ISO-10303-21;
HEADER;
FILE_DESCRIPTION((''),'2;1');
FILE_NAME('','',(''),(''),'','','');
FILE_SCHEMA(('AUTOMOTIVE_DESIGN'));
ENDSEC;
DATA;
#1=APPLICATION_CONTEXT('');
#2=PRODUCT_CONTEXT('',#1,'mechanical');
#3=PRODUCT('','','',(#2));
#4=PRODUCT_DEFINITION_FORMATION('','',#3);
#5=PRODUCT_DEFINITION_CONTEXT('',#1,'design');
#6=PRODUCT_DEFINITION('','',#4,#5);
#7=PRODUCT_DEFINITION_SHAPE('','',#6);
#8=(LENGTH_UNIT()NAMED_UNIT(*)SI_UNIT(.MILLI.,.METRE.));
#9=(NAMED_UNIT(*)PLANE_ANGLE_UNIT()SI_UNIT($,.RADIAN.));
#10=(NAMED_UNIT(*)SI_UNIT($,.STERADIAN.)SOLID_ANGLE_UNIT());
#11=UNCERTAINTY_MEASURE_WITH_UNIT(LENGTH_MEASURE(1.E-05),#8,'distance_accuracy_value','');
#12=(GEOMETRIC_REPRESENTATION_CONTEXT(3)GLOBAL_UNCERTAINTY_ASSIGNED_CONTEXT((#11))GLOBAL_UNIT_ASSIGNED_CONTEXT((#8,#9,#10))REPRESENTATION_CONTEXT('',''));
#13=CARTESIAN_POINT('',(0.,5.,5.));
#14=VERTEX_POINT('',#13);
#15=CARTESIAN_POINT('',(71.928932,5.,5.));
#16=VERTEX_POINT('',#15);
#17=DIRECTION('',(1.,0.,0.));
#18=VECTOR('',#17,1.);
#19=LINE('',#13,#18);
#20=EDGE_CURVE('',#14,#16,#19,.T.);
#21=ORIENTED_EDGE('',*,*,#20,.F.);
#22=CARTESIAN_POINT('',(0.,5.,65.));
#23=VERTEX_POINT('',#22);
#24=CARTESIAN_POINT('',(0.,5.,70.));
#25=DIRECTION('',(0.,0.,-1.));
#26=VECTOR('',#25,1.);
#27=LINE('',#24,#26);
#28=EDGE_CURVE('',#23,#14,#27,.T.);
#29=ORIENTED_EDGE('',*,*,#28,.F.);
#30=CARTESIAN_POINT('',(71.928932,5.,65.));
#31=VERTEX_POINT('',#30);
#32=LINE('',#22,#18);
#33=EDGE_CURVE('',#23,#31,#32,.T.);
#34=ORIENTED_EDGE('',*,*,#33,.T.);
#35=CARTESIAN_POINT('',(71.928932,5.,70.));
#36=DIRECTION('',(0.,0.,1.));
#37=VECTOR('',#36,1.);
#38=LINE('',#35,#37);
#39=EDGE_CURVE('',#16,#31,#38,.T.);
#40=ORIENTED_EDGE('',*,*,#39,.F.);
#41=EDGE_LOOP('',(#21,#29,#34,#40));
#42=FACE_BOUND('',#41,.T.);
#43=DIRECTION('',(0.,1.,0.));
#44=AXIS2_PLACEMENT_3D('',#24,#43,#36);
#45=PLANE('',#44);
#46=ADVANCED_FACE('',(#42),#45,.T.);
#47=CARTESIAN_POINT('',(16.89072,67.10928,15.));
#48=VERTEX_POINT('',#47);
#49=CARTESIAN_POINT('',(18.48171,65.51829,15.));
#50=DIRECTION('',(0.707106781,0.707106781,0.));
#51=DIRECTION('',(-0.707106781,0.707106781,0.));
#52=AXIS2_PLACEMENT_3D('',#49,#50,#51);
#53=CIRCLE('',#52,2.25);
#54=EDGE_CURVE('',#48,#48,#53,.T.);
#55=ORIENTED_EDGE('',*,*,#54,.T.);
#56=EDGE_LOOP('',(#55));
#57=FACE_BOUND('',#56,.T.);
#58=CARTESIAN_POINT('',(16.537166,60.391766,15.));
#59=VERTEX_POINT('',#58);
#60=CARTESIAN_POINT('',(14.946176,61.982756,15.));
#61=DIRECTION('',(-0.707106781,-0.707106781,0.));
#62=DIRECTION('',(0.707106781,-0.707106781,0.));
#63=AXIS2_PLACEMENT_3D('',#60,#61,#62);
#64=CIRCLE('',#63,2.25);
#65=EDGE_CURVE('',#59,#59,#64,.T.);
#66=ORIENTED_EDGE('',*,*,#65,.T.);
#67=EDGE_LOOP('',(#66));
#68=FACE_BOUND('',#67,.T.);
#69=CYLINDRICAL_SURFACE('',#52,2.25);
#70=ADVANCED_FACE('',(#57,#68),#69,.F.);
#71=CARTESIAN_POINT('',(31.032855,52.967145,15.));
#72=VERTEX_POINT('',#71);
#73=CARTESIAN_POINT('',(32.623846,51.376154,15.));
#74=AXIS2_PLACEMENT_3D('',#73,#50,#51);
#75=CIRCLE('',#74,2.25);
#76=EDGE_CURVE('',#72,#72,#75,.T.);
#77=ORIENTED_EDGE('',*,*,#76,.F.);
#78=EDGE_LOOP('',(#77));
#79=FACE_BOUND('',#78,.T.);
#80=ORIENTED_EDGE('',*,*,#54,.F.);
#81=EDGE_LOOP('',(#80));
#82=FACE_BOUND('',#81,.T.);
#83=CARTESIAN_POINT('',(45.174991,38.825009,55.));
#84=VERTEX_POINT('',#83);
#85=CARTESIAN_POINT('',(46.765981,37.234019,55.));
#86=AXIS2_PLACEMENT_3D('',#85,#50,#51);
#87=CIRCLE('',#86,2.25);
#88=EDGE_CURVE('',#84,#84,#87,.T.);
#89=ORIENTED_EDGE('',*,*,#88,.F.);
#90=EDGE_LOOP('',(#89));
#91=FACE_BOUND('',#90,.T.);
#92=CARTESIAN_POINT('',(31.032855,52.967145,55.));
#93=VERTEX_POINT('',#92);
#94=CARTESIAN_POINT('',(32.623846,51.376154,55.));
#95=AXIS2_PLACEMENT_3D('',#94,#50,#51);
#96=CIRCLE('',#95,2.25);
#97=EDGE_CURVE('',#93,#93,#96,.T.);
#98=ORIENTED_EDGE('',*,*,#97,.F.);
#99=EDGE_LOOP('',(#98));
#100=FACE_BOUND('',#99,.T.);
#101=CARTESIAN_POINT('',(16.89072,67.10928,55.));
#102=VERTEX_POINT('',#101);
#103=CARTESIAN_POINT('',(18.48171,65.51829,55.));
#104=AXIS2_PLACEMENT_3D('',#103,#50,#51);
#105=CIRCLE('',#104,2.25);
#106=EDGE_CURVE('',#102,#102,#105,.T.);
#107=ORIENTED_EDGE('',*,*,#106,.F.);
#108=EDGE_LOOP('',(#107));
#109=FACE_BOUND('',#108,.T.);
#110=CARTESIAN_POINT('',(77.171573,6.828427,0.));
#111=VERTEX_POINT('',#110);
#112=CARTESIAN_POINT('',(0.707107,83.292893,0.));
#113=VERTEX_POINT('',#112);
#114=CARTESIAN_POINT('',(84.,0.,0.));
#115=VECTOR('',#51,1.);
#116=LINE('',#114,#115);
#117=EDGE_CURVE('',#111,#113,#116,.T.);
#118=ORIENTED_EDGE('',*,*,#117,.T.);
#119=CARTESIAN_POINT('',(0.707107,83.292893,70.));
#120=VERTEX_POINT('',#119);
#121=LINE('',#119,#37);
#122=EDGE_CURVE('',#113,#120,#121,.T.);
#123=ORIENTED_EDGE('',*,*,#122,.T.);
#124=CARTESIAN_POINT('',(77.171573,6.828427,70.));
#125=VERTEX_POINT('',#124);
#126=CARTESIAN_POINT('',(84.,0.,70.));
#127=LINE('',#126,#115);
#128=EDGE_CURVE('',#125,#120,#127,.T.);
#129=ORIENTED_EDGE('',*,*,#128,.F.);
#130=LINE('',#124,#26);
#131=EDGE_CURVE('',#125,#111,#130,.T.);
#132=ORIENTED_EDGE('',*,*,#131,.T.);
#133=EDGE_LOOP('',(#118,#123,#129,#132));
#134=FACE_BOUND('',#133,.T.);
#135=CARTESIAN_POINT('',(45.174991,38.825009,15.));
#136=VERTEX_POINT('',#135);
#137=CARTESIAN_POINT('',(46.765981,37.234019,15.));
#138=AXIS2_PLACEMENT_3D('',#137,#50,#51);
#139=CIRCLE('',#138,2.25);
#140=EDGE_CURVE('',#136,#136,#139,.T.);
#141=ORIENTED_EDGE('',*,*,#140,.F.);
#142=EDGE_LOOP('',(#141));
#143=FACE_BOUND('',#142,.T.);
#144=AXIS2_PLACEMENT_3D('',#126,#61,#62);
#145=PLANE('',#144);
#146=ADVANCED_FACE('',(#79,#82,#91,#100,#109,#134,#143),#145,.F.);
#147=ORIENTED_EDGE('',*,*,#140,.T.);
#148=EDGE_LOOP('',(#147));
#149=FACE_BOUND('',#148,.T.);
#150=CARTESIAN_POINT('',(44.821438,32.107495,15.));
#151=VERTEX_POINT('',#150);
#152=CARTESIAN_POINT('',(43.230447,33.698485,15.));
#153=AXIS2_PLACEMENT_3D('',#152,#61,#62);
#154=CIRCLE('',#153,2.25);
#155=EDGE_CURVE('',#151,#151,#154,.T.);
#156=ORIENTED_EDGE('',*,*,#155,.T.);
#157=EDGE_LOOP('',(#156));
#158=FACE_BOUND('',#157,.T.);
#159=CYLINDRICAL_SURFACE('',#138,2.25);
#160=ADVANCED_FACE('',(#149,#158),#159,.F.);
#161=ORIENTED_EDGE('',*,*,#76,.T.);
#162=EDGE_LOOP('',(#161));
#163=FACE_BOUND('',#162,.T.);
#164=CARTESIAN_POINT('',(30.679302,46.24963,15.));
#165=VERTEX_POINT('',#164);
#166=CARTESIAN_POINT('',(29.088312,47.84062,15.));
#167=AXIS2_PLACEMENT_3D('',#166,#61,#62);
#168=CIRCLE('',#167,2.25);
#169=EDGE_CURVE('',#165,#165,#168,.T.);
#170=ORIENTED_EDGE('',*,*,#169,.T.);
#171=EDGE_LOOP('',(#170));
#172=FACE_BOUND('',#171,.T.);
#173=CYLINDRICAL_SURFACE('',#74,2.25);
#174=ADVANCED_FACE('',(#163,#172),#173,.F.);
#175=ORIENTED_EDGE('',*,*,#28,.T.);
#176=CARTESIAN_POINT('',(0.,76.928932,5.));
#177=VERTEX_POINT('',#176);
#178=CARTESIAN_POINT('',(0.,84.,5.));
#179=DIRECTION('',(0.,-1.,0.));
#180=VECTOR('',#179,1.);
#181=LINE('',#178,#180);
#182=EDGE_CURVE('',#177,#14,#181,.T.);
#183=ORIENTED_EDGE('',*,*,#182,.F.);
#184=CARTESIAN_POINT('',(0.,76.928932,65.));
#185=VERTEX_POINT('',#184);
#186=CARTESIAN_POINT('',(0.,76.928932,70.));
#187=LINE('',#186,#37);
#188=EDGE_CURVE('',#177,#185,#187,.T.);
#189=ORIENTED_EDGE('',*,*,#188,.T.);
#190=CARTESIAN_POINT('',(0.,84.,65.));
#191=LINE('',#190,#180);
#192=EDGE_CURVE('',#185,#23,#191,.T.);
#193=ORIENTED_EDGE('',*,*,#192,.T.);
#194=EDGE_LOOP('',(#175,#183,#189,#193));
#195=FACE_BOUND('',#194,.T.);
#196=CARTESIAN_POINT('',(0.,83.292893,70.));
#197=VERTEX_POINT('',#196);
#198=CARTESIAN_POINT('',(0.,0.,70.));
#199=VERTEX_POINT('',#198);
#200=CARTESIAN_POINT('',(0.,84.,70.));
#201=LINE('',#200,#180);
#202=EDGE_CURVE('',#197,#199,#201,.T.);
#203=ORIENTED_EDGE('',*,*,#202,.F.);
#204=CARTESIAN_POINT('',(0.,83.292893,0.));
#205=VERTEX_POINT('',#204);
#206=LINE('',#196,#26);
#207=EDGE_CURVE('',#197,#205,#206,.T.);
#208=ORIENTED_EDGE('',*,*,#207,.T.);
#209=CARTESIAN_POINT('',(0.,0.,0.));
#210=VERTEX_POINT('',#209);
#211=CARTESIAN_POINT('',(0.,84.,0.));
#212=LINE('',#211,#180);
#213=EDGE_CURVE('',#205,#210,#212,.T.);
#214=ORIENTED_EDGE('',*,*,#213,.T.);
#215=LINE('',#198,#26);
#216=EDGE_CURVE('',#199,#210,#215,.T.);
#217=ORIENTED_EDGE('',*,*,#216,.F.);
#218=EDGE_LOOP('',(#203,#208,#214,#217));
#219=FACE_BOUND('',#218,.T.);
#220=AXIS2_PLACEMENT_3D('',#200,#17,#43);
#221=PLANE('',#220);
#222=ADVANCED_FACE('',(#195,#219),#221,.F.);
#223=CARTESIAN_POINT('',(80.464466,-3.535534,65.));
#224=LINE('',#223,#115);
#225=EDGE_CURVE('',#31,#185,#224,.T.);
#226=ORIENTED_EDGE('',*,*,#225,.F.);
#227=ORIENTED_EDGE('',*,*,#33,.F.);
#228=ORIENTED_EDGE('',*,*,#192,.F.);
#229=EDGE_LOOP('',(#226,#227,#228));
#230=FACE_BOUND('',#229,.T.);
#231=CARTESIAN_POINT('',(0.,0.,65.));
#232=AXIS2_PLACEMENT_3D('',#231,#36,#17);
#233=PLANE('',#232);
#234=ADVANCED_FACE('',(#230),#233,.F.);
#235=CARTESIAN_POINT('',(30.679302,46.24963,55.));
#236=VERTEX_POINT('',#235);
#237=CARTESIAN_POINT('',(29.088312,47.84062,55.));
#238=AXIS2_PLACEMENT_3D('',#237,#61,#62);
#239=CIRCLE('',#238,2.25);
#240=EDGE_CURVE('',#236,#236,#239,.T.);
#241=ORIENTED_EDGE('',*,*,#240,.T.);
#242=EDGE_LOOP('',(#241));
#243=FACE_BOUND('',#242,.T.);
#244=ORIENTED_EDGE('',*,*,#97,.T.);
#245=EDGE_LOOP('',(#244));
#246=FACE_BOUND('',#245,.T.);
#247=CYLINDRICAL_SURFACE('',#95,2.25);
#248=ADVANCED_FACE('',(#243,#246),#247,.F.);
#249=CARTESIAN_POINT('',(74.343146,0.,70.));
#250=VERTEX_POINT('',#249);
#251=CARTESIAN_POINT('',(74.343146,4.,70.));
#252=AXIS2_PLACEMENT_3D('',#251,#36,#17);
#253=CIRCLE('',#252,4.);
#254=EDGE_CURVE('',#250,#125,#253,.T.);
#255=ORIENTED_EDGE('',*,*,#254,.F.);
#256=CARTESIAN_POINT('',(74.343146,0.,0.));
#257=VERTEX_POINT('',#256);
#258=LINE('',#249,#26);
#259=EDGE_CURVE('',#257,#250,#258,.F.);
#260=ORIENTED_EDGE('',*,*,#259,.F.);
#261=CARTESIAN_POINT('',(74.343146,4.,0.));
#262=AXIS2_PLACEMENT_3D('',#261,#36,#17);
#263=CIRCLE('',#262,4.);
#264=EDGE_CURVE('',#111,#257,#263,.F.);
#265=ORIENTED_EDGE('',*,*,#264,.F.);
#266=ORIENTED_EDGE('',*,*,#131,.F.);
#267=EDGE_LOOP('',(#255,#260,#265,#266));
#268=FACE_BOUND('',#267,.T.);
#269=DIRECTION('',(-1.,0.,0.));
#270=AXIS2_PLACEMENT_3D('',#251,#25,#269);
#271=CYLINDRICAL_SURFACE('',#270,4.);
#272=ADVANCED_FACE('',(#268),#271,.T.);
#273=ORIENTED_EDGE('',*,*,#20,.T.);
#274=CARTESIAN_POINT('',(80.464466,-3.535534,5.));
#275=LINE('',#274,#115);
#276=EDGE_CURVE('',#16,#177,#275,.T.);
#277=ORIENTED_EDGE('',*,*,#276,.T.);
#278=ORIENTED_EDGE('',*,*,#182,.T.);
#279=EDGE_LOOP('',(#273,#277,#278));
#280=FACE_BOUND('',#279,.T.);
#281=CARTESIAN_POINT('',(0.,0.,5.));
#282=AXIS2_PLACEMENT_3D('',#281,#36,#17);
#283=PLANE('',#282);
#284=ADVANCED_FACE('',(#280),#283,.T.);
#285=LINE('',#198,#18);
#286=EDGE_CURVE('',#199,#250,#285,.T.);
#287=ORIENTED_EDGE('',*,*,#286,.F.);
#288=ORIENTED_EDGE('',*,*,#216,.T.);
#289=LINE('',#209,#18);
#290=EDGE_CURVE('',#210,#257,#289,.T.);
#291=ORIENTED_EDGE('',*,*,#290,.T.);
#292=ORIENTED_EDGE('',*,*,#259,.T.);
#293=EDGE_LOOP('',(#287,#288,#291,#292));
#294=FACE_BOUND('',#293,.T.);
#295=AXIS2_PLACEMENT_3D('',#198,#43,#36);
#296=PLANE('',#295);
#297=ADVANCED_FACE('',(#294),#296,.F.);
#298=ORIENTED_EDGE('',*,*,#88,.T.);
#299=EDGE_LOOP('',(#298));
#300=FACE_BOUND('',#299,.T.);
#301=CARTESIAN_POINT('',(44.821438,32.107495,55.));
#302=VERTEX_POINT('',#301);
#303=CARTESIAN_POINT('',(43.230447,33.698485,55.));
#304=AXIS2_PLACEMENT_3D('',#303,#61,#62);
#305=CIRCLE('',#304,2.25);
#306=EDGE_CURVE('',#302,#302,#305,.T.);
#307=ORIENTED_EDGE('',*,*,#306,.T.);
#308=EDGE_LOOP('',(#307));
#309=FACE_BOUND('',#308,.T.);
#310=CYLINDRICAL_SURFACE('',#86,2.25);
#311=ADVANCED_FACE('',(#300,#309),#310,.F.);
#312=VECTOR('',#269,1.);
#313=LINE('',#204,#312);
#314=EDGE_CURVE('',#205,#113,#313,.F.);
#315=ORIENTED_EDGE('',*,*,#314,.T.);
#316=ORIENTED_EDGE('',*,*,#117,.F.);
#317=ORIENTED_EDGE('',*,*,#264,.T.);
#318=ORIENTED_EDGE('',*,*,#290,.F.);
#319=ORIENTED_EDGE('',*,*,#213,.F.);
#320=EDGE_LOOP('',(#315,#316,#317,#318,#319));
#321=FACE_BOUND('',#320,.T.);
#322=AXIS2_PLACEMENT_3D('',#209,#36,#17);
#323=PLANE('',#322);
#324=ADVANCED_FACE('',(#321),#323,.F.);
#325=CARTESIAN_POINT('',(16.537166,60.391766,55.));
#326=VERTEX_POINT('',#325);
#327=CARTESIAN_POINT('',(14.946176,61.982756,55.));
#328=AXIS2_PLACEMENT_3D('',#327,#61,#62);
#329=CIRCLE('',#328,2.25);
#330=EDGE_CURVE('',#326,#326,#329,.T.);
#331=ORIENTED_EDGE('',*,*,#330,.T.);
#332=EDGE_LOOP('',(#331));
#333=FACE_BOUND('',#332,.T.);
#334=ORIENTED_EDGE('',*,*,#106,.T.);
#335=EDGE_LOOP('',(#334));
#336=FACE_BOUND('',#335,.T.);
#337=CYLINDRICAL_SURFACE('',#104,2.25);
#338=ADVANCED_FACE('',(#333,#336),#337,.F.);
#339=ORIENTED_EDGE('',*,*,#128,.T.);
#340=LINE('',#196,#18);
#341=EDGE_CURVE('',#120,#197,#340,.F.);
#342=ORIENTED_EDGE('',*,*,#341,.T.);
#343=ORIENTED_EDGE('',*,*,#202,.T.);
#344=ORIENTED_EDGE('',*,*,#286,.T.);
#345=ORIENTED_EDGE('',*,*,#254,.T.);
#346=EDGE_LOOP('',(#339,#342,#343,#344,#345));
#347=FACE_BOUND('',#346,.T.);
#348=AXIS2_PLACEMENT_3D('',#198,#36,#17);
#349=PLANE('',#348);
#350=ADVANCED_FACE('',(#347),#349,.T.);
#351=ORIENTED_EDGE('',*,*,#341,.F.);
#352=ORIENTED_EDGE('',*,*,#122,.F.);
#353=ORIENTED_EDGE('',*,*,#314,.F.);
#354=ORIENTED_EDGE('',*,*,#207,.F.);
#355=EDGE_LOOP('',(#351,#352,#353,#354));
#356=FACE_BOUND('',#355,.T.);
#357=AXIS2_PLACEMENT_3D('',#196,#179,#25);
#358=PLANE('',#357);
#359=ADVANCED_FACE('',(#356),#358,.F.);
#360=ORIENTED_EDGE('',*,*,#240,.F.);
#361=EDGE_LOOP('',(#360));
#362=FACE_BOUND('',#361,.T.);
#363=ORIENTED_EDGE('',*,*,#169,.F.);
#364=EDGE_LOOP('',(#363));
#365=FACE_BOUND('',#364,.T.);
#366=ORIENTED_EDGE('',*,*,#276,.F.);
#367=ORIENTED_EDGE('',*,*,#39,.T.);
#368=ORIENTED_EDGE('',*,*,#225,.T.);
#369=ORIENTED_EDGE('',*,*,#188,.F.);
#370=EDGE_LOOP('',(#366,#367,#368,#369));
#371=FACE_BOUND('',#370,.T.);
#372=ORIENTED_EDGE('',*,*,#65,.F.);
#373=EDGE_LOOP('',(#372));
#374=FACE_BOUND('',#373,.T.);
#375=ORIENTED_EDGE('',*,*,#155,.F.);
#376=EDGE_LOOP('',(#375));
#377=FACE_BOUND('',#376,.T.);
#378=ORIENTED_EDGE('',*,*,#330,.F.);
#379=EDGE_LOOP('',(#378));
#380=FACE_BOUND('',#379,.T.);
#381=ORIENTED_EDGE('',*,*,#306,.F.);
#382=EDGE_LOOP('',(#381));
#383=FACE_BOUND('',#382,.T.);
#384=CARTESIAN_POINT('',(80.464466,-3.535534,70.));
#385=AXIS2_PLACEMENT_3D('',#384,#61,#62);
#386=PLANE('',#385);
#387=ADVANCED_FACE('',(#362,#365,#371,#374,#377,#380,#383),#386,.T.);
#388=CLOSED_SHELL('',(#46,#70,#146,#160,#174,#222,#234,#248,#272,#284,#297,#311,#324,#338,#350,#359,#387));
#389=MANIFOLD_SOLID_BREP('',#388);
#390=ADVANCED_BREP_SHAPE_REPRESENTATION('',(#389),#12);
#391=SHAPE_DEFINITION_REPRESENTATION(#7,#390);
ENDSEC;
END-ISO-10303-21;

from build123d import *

# Parameters (mm, degrees)
EXTRUDE_1_DEPTH             = 70
FILLET_1_R                  = 4
CHAMFER_1_SIZE              = 1
CHAMFER_1_SIZE2             = 0.707106781
SHELL_START                 = 5
SHELL_1_DEPTH               = 60
HOLE_WIZARD_4_5_4_5_1_D     = 4.5
HOLE_WIZARD_4_5_4_5_1_DEPTH = 10
HOLE_WIZARD_4_5_4_5_1_TIP   = 1.351936393


# Read off the part's stored shape, not the designer's step: 抽壳1
with BuildPart() as part:
    # 草图1 → 凸台-拉伸1 (new body)
    with BuildSketch(Plane.XY):
        Polygon((0, 0), (84, 0), (0, 84), align=None)
    extrude(amount=EXTRUDE_1_DEPTH)

    # 圆角1
    fillet_1_edges = [part.edges().sort_by_distance(p)[0] for p in [
        (84, 0, 35),
    ]]
    fillet(fillet_1_edges, radius=FILLET_1_R)

    # 倒角1
    chamfer_1_edges = [part.edges().sort_by_distance(p)[0] for p in [
        (0, 84, 35),
    ]]
    chamfer_1_side = [part.faces().sort_by_distance(p)[0] for p in [
        (38.585786438, 45.414213562, 35),
    ]]
    chamfer(chamfer_1_edges, length=CHAMFER_1_SIZE, length2=CHAMFER_1_SIZE2, reference=chamfer_1_side[0])

    # 抽壳1 outline → 抽壳1 (cut)
    with BuildSketch(Plane.XY.offset(SHELL_START)):
        Polygon((0, 5), (71.928932188, 5), (0, 76.928932188), align=None)
    extrude(amount=SHELL_1_DEPTH, mode=Mode.SUBTRACT)

    # Ø4.5 (4.5) 直径孔1
    with Locations(Plane(origin=(42, 42, 0), x_dir=(0.7071067811865475, -0.7071067811865477, 0), z_dir=(0.7071067811865477, 0.7071067811865475, 0))):
        with Locations((-33.25988463, -55), (-13.25988463, -55), (6.74011537, -55), (6.74011537, -15), (-13.25988463, -15), (-33.25988463, -15)):
            Hole(HOLE_WIZARD_4_5_4_5_1_D / 2, depth=HOLE_WIZARD_4_5_4_5_1_DEPTH)
            with Locations((0, 0, -(HOLE_WIZARD_4_5_4_5_1_DEPTH + HOLE_WIZARD_4_5_4_5_1_TIP / 2))):  # 118° drill point
                Cone(0, HOLE_WIZARD_4_5_4_5_1_D / 2, HOLE_WIZARD_4_5_4_5_1_TIP, mode=Mode.SUBTRACT)


solid = part.part
